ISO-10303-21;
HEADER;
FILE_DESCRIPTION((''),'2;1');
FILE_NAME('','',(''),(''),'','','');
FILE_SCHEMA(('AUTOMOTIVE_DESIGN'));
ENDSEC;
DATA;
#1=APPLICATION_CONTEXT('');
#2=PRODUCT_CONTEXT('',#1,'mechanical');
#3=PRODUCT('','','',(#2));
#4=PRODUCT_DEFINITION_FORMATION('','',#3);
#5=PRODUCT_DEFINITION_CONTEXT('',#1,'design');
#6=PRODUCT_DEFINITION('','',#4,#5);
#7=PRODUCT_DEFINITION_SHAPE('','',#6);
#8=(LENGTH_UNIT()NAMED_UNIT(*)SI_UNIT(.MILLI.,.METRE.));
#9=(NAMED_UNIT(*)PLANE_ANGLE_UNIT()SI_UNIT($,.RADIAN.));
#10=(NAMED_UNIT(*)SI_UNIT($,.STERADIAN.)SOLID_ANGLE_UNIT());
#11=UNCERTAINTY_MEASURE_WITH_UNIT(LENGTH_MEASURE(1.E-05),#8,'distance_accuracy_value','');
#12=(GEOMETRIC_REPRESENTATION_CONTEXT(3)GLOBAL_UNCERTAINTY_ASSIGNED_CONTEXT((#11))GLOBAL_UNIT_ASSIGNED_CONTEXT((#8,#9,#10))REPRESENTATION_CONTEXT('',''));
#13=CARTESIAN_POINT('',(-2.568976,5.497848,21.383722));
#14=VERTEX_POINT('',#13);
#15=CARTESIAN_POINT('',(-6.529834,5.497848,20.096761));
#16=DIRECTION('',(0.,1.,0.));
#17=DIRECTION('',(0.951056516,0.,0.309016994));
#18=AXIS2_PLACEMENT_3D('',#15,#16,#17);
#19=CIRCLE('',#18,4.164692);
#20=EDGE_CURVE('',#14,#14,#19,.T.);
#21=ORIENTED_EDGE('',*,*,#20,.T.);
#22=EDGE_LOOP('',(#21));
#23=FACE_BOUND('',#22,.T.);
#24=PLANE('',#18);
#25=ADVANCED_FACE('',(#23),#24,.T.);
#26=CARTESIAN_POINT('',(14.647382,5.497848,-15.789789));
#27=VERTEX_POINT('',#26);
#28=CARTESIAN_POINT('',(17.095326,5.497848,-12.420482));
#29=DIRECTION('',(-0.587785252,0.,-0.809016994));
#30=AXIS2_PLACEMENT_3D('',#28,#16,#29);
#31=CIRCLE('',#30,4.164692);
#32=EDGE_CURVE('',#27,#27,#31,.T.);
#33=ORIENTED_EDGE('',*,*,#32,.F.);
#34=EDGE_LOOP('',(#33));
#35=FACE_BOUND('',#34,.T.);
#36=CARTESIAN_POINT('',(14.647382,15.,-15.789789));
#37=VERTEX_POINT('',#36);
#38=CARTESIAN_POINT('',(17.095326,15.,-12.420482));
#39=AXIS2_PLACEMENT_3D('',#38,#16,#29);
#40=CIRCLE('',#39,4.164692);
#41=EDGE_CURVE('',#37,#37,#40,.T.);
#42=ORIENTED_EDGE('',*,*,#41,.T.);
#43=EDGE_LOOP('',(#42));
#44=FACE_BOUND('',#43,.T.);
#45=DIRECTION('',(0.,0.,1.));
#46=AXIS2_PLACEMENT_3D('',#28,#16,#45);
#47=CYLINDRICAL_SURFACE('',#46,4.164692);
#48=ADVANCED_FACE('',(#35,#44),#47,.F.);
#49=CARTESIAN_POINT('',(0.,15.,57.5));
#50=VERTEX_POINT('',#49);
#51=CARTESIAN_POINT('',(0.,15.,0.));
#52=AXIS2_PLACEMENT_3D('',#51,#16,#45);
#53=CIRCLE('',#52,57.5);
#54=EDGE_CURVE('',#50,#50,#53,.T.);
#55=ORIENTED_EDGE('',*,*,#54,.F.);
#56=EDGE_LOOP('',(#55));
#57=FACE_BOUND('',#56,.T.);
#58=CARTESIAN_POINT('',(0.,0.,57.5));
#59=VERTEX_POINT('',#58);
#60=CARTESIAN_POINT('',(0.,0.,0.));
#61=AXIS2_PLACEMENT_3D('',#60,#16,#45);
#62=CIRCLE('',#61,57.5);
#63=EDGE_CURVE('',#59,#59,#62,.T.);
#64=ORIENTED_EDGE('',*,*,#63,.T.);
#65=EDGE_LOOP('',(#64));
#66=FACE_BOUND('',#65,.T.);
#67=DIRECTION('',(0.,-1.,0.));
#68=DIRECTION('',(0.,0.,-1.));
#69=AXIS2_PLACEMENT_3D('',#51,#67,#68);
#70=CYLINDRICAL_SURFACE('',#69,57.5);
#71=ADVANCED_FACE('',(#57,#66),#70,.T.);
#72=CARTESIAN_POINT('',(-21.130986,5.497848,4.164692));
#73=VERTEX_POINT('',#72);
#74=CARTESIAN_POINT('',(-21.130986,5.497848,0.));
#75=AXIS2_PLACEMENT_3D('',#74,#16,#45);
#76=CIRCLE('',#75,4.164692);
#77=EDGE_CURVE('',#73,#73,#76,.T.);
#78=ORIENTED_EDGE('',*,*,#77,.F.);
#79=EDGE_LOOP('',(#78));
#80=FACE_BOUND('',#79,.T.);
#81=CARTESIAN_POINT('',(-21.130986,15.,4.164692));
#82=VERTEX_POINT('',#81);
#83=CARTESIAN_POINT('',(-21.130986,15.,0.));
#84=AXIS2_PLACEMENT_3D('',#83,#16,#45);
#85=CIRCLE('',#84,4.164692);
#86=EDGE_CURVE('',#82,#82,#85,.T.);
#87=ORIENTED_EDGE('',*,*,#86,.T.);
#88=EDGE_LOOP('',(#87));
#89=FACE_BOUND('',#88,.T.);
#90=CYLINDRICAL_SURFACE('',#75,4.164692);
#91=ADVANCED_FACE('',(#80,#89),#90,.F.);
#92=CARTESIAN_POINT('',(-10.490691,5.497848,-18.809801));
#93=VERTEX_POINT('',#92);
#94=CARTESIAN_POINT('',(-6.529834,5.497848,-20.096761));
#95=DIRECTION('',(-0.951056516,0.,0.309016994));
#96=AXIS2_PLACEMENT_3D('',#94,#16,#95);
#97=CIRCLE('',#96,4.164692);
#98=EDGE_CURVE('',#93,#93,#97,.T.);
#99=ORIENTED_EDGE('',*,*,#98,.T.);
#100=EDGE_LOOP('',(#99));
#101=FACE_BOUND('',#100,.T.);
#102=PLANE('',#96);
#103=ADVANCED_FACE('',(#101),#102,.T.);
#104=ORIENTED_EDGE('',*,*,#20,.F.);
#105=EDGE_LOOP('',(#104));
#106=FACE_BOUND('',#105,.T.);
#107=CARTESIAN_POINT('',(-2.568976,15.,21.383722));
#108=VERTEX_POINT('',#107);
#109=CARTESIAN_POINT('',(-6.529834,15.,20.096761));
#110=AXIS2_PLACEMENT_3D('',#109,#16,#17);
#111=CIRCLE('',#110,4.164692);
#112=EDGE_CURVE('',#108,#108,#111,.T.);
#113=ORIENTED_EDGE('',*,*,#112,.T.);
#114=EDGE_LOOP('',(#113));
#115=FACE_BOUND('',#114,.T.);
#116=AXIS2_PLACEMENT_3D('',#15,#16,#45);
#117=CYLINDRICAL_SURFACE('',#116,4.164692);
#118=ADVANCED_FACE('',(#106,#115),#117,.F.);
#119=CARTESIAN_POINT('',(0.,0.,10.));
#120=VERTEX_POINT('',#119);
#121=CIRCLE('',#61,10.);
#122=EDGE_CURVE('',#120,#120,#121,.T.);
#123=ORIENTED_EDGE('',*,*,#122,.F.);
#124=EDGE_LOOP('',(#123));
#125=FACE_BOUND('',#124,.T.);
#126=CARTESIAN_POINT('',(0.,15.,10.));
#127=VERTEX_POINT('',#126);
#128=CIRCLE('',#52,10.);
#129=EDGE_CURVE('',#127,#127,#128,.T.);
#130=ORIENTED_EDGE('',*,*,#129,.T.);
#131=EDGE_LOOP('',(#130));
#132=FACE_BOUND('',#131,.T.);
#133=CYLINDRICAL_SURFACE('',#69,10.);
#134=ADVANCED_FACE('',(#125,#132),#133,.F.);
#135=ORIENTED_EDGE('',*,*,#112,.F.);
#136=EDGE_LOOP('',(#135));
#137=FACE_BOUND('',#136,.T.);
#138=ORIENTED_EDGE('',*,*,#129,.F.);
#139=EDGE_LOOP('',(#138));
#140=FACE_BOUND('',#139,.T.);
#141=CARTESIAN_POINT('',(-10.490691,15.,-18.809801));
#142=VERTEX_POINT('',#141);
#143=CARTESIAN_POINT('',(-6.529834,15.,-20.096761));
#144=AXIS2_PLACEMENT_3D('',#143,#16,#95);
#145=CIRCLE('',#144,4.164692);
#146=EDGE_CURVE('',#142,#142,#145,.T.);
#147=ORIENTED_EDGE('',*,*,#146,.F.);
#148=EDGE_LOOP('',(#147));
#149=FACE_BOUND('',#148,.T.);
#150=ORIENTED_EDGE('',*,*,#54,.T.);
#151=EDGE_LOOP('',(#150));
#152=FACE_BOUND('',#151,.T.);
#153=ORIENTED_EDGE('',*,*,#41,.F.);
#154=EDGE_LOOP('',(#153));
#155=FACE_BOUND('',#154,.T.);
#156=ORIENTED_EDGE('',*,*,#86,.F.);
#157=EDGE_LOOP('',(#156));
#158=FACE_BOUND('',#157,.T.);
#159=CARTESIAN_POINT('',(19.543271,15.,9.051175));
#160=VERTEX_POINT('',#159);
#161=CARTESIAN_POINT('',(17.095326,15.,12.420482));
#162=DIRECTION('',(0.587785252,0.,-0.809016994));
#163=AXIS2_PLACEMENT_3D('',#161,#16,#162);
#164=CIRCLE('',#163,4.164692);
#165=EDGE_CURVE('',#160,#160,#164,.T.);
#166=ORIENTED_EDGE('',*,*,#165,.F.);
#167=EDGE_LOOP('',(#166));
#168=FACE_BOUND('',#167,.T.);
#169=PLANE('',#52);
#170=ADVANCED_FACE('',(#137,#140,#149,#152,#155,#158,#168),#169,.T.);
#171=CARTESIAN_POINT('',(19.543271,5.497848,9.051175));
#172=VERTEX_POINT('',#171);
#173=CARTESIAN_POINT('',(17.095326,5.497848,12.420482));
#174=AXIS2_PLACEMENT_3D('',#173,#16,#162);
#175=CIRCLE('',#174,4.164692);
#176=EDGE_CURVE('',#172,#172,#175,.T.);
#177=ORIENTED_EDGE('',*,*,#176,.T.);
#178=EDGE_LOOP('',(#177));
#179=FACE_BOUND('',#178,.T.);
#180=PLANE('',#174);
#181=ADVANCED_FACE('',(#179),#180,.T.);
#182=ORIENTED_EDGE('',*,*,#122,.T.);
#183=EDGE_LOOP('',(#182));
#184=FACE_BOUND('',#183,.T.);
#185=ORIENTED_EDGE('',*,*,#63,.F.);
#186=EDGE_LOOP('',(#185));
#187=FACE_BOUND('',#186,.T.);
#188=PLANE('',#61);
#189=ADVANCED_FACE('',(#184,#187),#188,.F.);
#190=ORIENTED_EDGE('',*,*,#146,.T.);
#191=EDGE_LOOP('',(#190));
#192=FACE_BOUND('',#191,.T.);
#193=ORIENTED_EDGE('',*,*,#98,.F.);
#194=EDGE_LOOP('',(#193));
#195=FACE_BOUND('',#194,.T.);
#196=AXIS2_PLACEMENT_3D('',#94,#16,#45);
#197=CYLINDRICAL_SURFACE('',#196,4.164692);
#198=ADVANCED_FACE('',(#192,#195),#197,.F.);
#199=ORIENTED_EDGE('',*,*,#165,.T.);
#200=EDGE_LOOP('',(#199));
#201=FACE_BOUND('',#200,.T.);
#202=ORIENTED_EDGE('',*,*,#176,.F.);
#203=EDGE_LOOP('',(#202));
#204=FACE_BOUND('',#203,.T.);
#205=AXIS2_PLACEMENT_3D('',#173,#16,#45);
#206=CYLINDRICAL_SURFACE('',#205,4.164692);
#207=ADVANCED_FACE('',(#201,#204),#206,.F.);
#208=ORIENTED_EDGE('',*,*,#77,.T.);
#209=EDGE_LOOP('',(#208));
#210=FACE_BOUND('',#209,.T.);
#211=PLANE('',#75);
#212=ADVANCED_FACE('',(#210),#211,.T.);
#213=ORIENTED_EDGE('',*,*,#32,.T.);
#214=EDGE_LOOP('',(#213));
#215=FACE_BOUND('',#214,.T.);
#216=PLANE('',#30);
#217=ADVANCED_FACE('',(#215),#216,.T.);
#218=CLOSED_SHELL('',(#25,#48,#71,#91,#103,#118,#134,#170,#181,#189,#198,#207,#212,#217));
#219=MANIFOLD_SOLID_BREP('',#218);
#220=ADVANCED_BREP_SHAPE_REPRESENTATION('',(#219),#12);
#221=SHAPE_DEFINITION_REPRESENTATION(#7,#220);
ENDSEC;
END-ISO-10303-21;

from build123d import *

# Parameters (mm, degrees)
SKETCH1_R           = 57.5
BOSS_EXTRUDE1_DEPTH = 15
SKETCH2_R           = 10
CUT_EXTRUDE1_DEPTH  = 83.689177043
SKETCH3_R           = 4.164692339
CUT_EXTRUDE2_DEPTH  = 9.502152281
CIRPATTERN1_COUNT   = 5


with BuildPart() as part:
    # Sketch1 → Boss-Extrude1 (new body)
    with BuildSketch(Plane(origin=(0, 0, 0), x_dir=(1, 0, 0), z_dir=(0, 1, 0))):
        Circle(SKETCH1_R)
    extrude(amount=BOSS_EXTRUDE1_DEPTH)

    # Sketch2 → Cut-Extrude1 (cut, through all)
    with BuildSketch(Plane(origin=(0, 0, 0), x_dir=(1, 0, 0), z_dir=(0, 1, 0))):
        Circle(SKETCH2_R)
    extrude(amount=CUT_EXTRUDE1_DEPTH, mode=Mode.SUBTRACT)

    # Sketch3 → Cut-Extrude2 (cut)
    with BuildSketch(Plane(origin=(0, 15, 0), x_dir=(1, 0, 0), z_dir=(0, 1, 0))):
        with Locations((-21.130985513, 0)):
            Circle(SKETCH3_R)
    cut_extrude2 = extrude(amount=-CUT_EXTRUDE2_DEPTH, mode=Mode.SUBTRACT)

    # CirPattern1: Cut-Extrude2 ×5 about axis
    cirpattern1_axis = Axis((0, 0, 0), (0, 1, 0))
    for i in range(1, CIRPATTERN1_COUNT):
        add(cut_extrude2.rotate(cirpattern1_axis, i * 360 / CIRPATTERN1_COUNT), mode=Mode.SUBTRACT)


solid = part.part
